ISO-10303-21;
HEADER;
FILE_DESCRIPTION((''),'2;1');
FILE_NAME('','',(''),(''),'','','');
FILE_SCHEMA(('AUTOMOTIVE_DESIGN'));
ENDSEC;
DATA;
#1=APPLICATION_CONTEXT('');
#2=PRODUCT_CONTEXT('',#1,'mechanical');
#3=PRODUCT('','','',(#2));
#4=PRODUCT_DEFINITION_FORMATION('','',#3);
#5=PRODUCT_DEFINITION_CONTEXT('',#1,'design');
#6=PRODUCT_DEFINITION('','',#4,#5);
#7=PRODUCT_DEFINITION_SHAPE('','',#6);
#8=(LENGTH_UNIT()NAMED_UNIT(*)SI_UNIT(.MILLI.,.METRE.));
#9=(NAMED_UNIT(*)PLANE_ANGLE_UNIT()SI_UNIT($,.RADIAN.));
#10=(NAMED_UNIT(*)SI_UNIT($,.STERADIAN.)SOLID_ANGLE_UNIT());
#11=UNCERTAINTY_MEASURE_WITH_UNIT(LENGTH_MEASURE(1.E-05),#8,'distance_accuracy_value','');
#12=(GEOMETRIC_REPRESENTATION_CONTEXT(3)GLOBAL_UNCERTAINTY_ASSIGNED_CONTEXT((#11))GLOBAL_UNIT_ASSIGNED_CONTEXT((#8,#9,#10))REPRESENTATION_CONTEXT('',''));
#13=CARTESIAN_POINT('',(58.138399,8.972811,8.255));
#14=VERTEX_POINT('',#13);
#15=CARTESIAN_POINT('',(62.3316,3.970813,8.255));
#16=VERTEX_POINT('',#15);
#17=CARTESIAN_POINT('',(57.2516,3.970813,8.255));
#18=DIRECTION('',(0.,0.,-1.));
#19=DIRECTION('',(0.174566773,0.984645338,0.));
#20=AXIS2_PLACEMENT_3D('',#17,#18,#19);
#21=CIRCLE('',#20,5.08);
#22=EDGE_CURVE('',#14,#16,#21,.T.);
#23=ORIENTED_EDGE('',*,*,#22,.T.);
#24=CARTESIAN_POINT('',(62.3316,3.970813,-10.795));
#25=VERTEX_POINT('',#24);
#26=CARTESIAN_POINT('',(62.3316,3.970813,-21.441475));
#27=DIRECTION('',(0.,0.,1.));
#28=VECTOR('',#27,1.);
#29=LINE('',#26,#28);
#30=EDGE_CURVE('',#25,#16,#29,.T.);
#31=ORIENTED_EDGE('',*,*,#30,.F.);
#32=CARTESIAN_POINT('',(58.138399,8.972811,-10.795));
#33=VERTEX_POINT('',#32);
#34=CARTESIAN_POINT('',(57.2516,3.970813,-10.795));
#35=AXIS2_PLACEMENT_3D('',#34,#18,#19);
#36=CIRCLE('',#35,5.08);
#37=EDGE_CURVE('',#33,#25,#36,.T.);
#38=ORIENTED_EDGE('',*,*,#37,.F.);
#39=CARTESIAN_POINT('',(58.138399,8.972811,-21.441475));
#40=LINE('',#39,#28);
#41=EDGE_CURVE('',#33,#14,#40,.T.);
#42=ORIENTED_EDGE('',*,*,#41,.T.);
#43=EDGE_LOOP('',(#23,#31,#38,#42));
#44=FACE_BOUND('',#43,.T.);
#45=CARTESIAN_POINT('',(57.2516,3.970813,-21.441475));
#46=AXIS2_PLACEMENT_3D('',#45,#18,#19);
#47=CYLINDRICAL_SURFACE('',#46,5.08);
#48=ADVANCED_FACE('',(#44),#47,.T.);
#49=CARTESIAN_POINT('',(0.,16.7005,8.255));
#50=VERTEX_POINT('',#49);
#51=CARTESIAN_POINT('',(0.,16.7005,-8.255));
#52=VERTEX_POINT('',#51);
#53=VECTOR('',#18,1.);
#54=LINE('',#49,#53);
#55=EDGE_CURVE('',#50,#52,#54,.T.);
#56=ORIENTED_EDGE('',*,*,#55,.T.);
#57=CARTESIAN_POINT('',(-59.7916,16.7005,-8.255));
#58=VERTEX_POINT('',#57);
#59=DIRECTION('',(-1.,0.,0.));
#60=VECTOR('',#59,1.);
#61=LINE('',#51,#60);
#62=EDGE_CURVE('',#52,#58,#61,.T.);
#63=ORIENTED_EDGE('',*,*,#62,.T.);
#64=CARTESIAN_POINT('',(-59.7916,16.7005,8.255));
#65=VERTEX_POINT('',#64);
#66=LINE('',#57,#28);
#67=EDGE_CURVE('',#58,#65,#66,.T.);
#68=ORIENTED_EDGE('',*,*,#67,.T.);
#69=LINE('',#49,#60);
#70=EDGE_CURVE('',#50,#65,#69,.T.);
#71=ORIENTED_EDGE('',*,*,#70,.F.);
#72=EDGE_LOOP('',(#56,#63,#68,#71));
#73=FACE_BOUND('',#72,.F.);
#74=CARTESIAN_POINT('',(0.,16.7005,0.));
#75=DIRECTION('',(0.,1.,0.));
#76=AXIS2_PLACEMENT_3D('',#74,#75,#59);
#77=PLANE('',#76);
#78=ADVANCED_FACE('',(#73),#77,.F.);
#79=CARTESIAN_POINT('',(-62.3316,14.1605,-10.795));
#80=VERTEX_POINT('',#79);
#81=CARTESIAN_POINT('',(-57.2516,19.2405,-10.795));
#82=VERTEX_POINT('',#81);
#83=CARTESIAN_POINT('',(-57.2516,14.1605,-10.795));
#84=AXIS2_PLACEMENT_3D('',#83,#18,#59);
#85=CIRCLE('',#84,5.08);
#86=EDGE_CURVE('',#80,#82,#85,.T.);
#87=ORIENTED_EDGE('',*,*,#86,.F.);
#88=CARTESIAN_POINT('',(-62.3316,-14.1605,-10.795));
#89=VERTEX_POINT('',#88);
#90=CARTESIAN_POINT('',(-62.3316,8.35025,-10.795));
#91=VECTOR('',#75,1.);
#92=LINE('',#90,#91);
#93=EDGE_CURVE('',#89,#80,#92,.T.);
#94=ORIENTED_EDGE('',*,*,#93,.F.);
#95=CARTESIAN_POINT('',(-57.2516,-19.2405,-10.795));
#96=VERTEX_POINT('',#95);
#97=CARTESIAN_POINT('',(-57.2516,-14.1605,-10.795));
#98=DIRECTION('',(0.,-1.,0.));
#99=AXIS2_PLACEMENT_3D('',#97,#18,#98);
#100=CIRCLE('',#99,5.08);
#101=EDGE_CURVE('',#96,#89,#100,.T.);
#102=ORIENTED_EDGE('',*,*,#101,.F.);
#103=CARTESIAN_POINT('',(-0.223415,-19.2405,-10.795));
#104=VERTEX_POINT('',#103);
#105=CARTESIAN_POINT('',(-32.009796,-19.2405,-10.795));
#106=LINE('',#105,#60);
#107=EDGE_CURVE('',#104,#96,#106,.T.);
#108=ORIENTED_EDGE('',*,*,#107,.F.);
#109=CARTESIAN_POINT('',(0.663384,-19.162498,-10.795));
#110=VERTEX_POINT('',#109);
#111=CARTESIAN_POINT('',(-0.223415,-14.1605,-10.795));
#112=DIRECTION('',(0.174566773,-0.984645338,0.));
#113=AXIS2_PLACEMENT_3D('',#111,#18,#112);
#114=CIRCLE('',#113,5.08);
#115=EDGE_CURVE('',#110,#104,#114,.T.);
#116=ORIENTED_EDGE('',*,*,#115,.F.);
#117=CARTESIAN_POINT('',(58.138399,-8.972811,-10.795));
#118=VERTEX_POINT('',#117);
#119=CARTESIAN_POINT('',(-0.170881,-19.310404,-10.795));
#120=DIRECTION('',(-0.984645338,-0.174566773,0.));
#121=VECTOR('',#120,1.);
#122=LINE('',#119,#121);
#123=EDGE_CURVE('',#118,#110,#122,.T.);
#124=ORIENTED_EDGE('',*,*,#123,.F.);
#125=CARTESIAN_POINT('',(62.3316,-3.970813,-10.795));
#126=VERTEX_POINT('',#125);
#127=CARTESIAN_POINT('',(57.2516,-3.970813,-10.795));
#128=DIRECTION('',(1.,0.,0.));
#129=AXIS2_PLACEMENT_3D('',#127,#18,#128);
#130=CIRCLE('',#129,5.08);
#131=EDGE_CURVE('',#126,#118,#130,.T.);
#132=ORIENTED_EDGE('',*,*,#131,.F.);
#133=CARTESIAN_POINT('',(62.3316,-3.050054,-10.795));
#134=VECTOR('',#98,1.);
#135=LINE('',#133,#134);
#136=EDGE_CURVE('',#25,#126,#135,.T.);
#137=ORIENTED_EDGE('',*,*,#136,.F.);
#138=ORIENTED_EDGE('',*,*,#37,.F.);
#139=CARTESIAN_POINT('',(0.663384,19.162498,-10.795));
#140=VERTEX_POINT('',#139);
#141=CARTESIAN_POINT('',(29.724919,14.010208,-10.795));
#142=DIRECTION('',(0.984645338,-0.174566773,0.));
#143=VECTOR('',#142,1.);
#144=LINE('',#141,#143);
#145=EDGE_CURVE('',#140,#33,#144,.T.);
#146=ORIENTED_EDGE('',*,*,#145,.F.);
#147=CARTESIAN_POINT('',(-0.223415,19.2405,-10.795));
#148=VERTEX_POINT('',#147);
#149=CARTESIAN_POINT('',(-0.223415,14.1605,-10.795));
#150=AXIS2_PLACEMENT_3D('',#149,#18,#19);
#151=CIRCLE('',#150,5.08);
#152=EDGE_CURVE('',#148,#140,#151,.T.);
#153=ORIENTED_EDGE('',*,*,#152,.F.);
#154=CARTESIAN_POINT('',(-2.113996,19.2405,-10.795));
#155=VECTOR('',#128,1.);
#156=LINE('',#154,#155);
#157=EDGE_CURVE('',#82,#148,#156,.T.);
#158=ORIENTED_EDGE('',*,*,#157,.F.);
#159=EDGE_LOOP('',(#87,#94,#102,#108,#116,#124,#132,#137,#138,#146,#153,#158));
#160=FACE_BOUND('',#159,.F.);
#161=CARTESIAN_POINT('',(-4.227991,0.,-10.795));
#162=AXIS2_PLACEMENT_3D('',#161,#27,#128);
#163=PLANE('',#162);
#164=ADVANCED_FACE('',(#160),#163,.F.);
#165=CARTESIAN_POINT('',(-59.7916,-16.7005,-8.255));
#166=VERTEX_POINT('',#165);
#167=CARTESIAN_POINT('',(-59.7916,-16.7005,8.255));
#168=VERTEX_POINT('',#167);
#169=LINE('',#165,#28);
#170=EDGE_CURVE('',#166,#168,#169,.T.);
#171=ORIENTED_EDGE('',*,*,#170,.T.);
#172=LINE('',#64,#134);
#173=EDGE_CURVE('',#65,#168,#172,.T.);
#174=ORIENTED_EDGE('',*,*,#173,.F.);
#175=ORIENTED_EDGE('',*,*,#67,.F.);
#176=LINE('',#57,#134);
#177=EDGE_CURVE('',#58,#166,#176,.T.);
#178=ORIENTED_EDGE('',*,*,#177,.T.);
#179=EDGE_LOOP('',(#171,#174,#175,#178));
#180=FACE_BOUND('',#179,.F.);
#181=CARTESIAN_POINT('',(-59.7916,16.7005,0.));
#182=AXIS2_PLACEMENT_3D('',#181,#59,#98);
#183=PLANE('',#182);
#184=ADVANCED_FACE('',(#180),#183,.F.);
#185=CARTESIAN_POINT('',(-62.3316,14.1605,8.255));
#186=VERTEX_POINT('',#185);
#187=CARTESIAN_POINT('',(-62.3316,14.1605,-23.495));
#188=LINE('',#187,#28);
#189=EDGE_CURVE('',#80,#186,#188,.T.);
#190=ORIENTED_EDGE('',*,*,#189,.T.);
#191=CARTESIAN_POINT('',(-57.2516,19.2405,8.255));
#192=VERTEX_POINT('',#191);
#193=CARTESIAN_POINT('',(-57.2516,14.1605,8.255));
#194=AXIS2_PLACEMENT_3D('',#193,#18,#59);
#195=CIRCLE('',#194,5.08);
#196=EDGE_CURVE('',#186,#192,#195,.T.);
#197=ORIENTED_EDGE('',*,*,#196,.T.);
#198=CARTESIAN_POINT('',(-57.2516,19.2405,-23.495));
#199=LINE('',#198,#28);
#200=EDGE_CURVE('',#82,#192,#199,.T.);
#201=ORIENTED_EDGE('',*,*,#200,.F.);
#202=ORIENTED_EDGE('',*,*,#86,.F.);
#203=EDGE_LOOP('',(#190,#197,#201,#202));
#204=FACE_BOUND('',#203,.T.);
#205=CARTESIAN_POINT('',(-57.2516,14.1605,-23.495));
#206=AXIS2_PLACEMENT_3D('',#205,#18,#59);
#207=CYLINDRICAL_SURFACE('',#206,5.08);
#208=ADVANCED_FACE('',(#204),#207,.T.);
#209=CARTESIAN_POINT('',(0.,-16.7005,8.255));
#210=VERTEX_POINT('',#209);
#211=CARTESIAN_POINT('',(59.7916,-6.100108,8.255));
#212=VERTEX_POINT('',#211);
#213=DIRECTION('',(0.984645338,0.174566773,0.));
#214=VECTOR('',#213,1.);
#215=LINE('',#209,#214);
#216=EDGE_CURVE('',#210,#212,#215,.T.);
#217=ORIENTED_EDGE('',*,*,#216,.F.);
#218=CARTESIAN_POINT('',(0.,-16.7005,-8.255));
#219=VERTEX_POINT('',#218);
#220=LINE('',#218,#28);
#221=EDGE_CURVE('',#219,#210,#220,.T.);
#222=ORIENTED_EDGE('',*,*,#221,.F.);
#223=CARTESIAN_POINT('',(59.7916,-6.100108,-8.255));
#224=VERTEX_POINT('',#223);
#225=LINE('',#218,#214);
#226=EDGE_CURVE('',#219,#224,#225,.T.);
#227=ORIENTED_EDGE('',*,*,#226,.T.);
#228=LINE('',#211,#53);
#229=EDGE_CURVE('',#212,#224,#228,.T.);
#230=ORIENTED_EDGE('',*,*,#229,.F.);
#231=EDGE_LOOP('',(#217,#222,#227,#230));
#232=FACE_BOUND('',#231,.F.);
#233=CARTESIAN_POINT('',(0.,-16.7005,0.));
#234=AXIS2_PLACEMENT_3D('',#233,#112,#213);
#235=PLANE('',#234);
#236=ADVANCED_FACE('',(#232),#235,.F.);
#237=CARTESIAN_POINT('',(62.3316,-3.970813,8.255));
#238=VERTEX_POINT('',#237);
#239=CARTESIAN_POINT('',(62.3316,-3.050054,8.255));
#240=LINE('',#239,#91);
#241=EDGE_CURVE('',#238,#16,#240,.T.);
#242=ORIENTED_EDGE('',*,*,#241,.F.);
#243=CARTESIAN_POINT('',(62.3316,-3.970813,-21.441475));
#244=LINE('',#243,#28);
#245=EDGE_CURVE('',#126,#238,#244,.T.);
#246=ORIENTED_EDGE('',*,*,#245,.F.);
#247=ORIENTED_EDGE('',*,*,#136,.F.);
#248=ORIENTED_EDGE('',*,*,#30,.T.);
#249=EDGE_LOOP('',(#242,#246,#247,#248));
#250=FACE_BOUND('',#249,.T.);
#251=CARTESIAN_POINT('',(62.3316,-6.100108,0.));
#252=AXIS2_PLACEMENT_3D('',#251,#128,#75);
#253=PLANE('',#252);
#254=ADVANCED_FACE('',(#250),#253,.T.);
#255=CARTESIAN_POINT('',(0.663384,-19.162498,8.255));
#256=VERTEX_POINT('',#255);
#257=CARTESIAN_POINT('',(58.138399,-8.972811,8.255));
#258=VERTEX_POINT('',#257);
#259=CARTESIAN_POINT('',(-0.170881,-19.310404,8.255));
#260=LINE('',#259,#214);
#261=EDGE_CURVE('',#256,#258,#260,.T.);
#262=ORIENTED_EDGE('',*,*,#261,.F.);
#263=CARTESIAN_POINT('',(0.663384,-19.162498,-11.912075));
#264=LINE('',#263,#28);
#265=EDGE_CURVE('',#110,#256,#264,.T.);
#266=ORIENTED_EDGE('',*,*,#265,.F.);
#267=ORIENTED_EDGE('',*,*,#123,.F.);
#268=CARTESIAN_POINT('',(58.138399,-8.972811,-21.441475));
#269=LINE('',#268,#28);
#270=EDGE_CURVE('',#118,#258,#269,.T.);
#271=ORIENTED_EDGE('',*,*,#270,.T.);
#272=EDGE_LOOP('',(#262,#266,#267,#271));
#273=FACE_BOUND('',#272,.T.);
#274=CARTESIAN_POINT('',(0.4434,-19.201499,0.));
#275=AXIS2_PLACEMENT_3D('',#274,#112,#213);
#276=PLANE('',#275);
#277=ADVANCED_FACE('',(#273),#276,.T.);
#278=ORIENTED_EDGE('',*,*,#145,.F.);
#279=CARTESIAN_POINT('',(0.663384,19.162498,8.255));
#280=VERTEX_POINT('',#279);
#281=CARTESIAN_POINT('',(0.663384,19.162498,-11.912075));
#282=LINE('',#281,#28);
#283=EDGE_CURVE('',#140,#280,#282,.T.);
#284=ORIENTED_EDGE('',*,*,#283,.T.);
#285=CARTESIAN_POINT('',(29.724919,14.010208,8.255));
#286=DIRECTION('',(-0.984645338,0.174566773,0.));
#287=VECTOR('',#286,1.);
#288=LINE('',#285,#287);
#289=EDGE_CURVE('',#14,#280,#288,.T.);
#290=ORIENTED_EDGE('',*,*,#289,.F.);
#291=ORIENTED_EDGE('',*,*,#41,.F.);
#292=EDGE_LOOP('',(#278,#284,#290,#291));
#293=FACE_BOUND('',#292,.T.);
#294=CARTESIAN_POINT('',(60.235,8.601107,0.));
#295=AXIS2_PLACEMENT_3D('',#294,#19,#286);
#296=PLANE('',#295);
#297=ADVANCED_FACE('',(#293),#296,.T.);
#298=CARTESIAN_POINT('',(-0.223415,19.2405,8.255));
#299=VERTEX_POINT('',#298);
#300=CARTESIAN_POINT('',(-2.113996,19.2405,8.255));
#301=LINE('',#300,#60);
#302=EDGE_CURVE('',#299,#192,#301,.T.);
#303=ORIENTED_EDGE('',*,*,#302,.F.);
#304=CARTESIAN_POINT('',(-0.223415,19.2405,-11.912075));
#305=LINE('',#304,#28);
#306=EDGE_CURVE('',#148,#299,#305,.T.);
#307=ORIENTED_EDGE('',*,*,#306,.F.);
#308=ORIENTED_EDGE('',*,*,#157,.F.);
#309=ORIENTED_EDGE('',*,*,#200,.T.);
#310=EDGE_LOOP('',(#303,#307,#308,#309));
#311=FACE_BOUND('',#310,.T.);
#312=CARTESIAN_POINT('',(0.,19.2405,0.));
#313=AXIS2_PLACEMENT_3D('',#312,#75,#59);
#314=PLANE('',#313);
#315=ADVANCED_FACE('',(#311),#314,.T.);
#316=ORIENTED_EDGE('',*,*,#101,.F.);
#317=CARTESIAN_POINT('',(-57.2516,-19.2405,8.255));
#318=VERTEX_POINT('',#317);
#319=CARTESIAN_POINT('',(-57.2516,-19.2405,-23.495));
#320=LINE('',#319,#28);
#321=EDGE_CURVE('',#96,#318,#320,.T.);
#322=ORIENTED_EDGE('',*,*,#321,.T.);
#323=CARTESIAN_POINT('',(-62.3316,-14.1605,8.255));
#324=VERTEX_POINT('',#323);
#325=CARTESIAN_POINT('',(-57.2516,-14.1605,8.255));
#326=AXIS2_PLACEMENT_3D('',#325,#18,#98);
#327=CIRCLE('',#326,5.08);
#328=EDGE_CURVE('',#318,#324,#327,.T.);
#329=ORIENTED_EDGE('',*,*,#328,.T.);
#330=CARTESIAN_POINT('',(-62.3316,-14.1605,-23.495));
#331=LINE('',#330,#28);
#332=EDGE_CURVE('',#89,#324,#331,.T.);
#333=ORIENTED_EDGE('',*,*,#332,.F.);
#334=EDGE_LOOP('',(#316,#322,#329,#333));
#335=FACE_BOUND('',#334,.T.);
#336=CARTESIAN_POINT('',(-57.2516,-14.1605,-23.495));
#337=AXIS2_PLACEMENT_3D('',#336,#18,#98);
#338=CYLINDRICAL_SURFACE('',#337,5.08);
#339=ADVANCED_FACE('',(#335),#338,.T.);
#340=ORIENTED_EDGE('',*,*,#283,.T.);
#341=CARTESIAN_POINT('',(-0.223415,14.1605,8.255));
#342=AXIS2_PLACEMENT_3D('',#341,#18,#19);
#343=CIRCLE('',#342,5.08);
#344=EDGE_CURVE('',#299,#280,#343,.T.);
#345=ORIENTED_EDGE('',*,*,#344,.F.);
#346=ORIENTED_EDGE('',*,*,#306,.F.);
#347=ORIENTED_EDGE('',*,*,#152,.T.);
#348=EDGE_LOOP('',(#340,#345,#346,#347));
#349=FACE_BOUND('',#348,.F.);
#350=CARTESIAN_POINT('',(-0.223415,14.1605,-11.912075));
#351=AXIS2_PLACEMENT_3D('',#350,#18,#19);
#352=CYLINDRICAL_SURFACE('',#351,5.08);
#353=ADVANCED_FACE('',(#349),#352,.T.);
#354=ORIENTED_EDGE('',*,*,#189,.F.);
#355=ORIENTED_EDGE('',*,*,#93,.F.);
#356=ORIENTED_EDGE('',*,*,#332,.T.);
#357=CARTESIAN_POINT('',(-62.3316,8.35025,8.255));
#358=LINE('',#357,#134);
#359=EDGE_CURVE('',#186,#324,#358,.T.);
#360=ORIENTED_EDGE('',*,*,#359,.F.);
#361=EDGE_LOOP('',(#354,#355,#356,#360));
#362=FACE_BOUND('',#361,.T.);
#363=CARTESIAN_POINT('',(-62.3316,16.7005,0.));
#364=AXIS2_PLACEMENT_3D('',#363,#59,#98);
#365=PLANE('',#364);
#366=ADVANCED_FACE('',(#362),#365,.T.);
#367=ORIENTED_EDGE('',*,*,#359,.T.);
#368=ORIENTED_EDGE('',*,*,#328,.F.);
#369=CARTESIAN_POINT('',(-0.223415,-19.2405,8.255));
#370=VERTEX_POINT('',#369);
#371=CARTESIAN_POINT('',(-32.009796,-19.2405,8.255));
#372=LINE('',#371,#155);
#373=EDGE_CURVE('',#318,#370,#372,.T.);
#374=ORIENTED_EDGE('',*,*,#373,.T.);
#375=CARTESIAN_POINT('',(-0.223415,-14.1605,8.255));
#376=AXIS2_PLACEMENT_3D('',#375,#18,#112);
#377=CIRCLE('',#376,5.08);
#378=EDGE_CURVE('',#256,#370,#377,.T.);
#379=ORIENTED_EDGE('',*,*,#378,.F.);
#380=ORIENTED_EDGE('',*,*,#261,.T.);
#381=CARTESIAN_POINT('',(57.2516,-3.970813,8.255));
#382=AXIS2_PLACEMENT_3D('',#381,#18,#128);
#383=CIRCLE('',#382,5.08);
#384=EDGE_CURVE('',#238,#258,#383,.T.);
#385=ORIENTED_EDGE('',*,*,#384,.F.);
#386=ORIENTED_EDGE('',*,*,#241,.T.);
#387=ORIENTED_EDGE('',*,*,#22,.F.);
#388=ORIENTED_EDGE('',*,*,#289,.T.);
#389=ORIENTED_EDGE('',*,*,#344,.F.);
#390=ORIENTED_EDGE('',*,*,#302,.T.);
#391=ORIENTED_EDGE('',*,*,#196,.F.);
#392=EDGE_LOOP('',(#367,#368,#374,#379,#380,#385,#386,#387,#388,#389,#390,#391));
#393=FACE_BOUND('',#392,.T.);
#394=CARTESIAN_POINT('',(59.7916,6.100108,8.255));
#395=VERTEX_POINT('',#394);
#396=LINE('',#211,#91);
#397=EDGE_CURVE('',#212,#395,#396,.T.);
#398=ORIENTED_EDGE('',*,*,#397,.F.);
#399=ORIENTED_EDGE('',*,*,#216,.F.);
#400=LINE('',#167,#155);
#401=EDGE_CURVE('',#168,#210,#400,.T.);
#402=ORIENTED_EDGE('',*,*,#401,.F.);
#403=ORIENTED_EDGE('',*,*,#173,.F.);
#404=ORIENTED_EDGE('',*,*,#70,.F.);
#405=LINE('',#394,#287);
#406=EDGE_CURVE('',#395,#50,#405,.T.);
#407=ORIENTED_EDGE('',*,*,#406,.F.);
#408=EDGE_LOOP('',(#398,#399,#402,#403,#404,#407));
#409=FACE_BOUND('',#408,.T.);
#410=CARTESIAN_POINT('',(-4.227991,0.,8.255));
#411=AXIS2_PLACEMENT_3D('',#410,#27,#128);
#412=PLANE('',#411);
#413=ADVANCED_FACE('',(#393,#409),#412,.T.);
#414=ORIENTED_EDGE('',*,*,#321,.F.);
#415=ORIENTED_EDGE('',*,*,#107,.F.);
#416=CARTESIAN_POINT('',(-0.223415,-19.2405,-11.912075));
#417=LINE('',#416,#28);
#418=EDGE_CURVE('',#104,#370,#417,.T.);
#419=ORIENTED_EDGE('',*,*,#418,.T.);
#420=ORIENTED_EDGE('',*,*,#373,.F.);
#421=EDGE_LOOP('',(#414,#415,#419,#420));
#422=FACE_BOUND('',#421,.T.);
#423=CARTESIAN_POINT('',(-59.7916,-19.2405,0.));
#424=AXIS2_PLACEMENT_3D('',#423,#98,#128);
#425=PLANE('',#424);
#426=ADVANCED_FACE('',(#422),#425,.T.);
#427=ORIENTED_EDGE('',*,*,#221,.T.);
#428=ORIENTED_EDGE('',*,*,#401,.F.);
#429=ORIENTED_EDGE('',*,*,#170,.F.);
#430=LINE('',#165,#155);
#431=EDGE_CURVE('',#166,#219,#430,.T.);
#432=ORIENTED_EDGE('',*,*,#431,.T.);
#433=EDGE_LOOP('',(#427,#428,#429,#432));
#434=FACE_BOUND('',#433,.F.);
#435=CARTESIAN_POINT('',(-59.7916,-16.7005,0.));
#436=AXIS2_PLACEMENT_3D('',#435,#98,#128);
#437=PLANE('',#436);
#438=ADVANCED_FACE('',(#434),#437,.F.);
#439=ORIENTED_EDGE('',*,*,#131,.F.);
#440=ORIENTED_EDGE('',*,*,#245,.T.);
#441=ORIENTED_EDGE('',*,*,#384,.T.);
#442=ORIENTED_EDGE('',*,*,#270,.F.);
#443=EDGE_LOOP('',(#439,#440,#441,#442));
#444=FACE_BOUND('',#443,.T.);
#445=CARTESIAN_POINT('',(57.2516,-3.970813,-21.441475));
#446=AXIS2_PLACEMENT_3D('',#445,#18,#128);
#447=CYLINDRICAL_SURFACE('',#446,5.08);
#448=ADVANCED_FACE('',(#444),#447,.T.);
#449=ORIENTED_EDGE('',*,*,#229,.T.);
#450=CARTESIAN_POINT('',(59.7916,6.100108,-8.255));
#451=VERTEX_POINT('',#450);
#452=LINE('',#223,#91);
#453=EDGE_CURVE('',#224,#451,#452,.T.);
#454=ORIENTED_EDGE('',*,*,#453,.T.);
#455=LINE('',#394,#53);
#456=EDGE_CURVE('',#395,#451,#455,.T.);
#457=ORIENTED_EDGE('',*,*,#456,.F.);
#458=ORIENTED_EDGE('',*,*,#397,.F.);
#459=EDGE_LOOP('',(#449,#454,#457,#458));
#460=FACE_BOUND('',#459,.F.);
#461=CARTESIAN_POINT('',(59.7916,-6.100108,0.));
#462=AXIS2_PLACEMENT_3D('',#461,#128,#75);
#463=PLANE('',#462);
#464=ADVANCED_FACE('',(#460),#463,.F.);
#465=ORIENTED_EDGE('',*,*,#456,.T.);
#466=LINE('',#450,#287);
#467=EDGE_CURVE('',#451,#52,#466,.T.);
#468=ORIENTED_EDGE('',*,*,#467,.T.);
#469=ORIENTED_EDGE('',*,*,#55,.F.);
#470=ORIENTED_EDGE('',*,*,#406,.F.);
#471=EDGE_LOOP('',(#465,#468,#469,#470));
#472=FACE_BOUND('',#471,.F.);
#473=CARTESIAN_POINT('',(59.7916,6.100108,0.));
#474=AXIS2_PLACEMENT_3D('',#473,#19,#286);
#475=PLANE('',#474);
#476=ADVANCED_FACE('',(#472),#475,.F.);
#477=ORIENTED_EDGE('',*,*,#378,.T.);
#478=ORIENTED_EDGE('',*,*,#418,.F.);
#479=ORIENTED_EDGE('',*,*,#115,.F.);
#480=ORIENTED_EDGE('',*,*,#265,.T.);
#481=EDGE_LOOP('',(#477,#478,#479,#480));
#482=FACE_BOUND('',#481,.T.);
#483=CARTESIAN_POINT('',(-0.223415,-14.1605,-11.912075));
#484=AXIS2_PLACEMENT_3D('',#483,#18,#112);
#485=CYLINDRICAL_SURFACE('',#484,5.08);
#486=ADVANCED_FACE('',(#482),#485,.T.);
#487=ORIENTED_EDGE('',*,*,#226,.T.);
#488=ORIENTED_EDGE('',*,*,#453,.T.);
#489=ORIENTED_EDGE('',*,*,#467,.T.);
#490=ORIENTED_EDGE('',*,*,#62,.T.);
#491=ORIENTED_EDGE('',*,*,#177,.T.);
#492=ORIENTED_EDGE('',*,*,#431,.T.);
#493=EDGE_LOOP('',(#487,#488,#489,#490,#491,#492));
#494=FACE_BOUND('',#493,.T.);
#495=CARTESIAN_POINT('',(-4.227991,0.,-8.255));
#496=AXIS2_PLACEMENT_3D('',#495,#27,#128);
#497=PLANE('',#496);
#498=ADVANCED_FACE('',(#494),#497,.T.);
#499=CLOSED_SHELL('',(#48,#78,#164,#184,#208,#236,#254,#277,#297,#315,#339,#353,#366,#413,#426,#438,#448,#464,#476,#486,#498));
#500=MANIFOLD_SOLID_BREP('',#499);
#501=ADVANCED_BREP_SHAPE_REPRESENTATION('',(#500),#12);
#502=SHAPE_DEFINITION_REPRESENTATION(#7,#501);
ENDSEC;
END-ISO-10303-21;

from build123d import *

# Parameters (mm, degrees)
F1_DEPTH    = 8.255
F2_T        = 2.54
F3_T1_DEPTH = 40.3429500211
F3_T3_DEPTH = 21.284150325
F3_T5_DEPTH = 44.45


# Not quite as in the source:
# - a fillet or chamfer that OpenCascade refuses, or shapes differently, is made with other operations: its cross-section is extruded or revolved along the edge and cut away or added


with BuildPart() as f1:
    # F0 (on Top) → F1 (new body, symmetric)
    with BuildSketch(Plane.XY):
        Polygon((0, 16.7005), (-59.7916, 16.7005), (-59.7916, -16.7005), (0, -16.7005), (59.7916, -6.1001079157), (59.7916, 6.1001079157), align=None)
    extrude(amount=F1_DEPTH, both=True)

    # F2
    f2_openings = [f1.faces().sort_by_distance(p)[0] for p in [
        (-7.518342, 0, 8.255),
    ]]
    offset(amount=F2_T, openings=f2_openings, kind=Kind.INTERSECTION)

    # F3: fillet of radius 5.08 on 6 edges, made by hand

    # F3_s2 → F3_t1 (cut)
    with BuildSketch(Plane.XY.offset(-21.4414750105)):
        with BuildLine():
            ThreePointArc((58.1383992054, 8.9728112312), (61.1446283818, 7.2343585343), (62.3316, 3.9708129136))
            Line((62.3316, 3.9708129136), (62.3316, 8.2294029178))
            Line((62.3316, 8.2294029178), (58.1383992054, 8.9728112312))
        make_face()
        with BuildLine():
            ThreePointArc((62.3316, -3.9708129136), (61.1446283818, -7.2343585343), (58.1383992054, -8.9728112312))
            Line((58.1383992054, -8.9728112312), (62.3316, -8.2294029178))
            Line((62.3316, -8.2294029178), (62.3316, -3.9708129136))
        make_face()
    extrude(amount=F3_T1_DEPTH, mode=Mode.SUBTRACT)

    # F3_s4 → F3_t3 (cut)
    with BuildSketch(Plane.XY.offset(-11.9120751625)):
        with BuildLine():
            ThreePointArc((0.6633841729, 19.1624983176), (0.2216964966, 19.2209620072), (-0.2234150325, 19.2405))
            Line((-0.2234150325, 19.2405), (0.2234150325, 19.2405))
            Line((0.2234150325, 19.2405), (0.6633841729, 19.1624983176))
        make_face()
        with BuildLine():
            ThreePointArc((0.6633841729, -19.1624983176), (0.2216964966, -19.2209620072), (-0.2234150325, -19.2405))
            Line((-0.2234150325, -19.2405), (0.2234150325, -19.2405))
            Line((0.2234150325, -19.2405), (0.6633841729, -19.1624983176))
        make_face()
    extrude(amount=F3_T3_DEPTH, mode=Mode.SUBTRACT)

    # F3_s6 → F3_t5 (cut)
    with BuildSketch(Plane.XY.offset(-23.495)):
        with BuildLine():
            ThreePointArc((-57.2516, -19.2405), (-60.8437024484, -17.7526024484), (-62.3316, -14.1605))
            Line((-62.3316, -14.1605), (-62.3316, -19.2405))
            Line((-62.3316, -19.2405), (-57.2516, -19.2405))
        make_face()
        with BuildLine():
            ThreePointArc((-62.3316, 14.1605), (-60.8437024484, 17.7526024484), (-57.2516, 19.2405))
            Line((-57.2516, 19.2405), (-62.3316, 19.2405))
            Line((-62.3316, 19.2405), (-62.3316, 14.1605))
        make_face()
    extrude(amount=F3_T5_DEPTH, mode=Mode.SUBTRACT)


solid = f1.part
